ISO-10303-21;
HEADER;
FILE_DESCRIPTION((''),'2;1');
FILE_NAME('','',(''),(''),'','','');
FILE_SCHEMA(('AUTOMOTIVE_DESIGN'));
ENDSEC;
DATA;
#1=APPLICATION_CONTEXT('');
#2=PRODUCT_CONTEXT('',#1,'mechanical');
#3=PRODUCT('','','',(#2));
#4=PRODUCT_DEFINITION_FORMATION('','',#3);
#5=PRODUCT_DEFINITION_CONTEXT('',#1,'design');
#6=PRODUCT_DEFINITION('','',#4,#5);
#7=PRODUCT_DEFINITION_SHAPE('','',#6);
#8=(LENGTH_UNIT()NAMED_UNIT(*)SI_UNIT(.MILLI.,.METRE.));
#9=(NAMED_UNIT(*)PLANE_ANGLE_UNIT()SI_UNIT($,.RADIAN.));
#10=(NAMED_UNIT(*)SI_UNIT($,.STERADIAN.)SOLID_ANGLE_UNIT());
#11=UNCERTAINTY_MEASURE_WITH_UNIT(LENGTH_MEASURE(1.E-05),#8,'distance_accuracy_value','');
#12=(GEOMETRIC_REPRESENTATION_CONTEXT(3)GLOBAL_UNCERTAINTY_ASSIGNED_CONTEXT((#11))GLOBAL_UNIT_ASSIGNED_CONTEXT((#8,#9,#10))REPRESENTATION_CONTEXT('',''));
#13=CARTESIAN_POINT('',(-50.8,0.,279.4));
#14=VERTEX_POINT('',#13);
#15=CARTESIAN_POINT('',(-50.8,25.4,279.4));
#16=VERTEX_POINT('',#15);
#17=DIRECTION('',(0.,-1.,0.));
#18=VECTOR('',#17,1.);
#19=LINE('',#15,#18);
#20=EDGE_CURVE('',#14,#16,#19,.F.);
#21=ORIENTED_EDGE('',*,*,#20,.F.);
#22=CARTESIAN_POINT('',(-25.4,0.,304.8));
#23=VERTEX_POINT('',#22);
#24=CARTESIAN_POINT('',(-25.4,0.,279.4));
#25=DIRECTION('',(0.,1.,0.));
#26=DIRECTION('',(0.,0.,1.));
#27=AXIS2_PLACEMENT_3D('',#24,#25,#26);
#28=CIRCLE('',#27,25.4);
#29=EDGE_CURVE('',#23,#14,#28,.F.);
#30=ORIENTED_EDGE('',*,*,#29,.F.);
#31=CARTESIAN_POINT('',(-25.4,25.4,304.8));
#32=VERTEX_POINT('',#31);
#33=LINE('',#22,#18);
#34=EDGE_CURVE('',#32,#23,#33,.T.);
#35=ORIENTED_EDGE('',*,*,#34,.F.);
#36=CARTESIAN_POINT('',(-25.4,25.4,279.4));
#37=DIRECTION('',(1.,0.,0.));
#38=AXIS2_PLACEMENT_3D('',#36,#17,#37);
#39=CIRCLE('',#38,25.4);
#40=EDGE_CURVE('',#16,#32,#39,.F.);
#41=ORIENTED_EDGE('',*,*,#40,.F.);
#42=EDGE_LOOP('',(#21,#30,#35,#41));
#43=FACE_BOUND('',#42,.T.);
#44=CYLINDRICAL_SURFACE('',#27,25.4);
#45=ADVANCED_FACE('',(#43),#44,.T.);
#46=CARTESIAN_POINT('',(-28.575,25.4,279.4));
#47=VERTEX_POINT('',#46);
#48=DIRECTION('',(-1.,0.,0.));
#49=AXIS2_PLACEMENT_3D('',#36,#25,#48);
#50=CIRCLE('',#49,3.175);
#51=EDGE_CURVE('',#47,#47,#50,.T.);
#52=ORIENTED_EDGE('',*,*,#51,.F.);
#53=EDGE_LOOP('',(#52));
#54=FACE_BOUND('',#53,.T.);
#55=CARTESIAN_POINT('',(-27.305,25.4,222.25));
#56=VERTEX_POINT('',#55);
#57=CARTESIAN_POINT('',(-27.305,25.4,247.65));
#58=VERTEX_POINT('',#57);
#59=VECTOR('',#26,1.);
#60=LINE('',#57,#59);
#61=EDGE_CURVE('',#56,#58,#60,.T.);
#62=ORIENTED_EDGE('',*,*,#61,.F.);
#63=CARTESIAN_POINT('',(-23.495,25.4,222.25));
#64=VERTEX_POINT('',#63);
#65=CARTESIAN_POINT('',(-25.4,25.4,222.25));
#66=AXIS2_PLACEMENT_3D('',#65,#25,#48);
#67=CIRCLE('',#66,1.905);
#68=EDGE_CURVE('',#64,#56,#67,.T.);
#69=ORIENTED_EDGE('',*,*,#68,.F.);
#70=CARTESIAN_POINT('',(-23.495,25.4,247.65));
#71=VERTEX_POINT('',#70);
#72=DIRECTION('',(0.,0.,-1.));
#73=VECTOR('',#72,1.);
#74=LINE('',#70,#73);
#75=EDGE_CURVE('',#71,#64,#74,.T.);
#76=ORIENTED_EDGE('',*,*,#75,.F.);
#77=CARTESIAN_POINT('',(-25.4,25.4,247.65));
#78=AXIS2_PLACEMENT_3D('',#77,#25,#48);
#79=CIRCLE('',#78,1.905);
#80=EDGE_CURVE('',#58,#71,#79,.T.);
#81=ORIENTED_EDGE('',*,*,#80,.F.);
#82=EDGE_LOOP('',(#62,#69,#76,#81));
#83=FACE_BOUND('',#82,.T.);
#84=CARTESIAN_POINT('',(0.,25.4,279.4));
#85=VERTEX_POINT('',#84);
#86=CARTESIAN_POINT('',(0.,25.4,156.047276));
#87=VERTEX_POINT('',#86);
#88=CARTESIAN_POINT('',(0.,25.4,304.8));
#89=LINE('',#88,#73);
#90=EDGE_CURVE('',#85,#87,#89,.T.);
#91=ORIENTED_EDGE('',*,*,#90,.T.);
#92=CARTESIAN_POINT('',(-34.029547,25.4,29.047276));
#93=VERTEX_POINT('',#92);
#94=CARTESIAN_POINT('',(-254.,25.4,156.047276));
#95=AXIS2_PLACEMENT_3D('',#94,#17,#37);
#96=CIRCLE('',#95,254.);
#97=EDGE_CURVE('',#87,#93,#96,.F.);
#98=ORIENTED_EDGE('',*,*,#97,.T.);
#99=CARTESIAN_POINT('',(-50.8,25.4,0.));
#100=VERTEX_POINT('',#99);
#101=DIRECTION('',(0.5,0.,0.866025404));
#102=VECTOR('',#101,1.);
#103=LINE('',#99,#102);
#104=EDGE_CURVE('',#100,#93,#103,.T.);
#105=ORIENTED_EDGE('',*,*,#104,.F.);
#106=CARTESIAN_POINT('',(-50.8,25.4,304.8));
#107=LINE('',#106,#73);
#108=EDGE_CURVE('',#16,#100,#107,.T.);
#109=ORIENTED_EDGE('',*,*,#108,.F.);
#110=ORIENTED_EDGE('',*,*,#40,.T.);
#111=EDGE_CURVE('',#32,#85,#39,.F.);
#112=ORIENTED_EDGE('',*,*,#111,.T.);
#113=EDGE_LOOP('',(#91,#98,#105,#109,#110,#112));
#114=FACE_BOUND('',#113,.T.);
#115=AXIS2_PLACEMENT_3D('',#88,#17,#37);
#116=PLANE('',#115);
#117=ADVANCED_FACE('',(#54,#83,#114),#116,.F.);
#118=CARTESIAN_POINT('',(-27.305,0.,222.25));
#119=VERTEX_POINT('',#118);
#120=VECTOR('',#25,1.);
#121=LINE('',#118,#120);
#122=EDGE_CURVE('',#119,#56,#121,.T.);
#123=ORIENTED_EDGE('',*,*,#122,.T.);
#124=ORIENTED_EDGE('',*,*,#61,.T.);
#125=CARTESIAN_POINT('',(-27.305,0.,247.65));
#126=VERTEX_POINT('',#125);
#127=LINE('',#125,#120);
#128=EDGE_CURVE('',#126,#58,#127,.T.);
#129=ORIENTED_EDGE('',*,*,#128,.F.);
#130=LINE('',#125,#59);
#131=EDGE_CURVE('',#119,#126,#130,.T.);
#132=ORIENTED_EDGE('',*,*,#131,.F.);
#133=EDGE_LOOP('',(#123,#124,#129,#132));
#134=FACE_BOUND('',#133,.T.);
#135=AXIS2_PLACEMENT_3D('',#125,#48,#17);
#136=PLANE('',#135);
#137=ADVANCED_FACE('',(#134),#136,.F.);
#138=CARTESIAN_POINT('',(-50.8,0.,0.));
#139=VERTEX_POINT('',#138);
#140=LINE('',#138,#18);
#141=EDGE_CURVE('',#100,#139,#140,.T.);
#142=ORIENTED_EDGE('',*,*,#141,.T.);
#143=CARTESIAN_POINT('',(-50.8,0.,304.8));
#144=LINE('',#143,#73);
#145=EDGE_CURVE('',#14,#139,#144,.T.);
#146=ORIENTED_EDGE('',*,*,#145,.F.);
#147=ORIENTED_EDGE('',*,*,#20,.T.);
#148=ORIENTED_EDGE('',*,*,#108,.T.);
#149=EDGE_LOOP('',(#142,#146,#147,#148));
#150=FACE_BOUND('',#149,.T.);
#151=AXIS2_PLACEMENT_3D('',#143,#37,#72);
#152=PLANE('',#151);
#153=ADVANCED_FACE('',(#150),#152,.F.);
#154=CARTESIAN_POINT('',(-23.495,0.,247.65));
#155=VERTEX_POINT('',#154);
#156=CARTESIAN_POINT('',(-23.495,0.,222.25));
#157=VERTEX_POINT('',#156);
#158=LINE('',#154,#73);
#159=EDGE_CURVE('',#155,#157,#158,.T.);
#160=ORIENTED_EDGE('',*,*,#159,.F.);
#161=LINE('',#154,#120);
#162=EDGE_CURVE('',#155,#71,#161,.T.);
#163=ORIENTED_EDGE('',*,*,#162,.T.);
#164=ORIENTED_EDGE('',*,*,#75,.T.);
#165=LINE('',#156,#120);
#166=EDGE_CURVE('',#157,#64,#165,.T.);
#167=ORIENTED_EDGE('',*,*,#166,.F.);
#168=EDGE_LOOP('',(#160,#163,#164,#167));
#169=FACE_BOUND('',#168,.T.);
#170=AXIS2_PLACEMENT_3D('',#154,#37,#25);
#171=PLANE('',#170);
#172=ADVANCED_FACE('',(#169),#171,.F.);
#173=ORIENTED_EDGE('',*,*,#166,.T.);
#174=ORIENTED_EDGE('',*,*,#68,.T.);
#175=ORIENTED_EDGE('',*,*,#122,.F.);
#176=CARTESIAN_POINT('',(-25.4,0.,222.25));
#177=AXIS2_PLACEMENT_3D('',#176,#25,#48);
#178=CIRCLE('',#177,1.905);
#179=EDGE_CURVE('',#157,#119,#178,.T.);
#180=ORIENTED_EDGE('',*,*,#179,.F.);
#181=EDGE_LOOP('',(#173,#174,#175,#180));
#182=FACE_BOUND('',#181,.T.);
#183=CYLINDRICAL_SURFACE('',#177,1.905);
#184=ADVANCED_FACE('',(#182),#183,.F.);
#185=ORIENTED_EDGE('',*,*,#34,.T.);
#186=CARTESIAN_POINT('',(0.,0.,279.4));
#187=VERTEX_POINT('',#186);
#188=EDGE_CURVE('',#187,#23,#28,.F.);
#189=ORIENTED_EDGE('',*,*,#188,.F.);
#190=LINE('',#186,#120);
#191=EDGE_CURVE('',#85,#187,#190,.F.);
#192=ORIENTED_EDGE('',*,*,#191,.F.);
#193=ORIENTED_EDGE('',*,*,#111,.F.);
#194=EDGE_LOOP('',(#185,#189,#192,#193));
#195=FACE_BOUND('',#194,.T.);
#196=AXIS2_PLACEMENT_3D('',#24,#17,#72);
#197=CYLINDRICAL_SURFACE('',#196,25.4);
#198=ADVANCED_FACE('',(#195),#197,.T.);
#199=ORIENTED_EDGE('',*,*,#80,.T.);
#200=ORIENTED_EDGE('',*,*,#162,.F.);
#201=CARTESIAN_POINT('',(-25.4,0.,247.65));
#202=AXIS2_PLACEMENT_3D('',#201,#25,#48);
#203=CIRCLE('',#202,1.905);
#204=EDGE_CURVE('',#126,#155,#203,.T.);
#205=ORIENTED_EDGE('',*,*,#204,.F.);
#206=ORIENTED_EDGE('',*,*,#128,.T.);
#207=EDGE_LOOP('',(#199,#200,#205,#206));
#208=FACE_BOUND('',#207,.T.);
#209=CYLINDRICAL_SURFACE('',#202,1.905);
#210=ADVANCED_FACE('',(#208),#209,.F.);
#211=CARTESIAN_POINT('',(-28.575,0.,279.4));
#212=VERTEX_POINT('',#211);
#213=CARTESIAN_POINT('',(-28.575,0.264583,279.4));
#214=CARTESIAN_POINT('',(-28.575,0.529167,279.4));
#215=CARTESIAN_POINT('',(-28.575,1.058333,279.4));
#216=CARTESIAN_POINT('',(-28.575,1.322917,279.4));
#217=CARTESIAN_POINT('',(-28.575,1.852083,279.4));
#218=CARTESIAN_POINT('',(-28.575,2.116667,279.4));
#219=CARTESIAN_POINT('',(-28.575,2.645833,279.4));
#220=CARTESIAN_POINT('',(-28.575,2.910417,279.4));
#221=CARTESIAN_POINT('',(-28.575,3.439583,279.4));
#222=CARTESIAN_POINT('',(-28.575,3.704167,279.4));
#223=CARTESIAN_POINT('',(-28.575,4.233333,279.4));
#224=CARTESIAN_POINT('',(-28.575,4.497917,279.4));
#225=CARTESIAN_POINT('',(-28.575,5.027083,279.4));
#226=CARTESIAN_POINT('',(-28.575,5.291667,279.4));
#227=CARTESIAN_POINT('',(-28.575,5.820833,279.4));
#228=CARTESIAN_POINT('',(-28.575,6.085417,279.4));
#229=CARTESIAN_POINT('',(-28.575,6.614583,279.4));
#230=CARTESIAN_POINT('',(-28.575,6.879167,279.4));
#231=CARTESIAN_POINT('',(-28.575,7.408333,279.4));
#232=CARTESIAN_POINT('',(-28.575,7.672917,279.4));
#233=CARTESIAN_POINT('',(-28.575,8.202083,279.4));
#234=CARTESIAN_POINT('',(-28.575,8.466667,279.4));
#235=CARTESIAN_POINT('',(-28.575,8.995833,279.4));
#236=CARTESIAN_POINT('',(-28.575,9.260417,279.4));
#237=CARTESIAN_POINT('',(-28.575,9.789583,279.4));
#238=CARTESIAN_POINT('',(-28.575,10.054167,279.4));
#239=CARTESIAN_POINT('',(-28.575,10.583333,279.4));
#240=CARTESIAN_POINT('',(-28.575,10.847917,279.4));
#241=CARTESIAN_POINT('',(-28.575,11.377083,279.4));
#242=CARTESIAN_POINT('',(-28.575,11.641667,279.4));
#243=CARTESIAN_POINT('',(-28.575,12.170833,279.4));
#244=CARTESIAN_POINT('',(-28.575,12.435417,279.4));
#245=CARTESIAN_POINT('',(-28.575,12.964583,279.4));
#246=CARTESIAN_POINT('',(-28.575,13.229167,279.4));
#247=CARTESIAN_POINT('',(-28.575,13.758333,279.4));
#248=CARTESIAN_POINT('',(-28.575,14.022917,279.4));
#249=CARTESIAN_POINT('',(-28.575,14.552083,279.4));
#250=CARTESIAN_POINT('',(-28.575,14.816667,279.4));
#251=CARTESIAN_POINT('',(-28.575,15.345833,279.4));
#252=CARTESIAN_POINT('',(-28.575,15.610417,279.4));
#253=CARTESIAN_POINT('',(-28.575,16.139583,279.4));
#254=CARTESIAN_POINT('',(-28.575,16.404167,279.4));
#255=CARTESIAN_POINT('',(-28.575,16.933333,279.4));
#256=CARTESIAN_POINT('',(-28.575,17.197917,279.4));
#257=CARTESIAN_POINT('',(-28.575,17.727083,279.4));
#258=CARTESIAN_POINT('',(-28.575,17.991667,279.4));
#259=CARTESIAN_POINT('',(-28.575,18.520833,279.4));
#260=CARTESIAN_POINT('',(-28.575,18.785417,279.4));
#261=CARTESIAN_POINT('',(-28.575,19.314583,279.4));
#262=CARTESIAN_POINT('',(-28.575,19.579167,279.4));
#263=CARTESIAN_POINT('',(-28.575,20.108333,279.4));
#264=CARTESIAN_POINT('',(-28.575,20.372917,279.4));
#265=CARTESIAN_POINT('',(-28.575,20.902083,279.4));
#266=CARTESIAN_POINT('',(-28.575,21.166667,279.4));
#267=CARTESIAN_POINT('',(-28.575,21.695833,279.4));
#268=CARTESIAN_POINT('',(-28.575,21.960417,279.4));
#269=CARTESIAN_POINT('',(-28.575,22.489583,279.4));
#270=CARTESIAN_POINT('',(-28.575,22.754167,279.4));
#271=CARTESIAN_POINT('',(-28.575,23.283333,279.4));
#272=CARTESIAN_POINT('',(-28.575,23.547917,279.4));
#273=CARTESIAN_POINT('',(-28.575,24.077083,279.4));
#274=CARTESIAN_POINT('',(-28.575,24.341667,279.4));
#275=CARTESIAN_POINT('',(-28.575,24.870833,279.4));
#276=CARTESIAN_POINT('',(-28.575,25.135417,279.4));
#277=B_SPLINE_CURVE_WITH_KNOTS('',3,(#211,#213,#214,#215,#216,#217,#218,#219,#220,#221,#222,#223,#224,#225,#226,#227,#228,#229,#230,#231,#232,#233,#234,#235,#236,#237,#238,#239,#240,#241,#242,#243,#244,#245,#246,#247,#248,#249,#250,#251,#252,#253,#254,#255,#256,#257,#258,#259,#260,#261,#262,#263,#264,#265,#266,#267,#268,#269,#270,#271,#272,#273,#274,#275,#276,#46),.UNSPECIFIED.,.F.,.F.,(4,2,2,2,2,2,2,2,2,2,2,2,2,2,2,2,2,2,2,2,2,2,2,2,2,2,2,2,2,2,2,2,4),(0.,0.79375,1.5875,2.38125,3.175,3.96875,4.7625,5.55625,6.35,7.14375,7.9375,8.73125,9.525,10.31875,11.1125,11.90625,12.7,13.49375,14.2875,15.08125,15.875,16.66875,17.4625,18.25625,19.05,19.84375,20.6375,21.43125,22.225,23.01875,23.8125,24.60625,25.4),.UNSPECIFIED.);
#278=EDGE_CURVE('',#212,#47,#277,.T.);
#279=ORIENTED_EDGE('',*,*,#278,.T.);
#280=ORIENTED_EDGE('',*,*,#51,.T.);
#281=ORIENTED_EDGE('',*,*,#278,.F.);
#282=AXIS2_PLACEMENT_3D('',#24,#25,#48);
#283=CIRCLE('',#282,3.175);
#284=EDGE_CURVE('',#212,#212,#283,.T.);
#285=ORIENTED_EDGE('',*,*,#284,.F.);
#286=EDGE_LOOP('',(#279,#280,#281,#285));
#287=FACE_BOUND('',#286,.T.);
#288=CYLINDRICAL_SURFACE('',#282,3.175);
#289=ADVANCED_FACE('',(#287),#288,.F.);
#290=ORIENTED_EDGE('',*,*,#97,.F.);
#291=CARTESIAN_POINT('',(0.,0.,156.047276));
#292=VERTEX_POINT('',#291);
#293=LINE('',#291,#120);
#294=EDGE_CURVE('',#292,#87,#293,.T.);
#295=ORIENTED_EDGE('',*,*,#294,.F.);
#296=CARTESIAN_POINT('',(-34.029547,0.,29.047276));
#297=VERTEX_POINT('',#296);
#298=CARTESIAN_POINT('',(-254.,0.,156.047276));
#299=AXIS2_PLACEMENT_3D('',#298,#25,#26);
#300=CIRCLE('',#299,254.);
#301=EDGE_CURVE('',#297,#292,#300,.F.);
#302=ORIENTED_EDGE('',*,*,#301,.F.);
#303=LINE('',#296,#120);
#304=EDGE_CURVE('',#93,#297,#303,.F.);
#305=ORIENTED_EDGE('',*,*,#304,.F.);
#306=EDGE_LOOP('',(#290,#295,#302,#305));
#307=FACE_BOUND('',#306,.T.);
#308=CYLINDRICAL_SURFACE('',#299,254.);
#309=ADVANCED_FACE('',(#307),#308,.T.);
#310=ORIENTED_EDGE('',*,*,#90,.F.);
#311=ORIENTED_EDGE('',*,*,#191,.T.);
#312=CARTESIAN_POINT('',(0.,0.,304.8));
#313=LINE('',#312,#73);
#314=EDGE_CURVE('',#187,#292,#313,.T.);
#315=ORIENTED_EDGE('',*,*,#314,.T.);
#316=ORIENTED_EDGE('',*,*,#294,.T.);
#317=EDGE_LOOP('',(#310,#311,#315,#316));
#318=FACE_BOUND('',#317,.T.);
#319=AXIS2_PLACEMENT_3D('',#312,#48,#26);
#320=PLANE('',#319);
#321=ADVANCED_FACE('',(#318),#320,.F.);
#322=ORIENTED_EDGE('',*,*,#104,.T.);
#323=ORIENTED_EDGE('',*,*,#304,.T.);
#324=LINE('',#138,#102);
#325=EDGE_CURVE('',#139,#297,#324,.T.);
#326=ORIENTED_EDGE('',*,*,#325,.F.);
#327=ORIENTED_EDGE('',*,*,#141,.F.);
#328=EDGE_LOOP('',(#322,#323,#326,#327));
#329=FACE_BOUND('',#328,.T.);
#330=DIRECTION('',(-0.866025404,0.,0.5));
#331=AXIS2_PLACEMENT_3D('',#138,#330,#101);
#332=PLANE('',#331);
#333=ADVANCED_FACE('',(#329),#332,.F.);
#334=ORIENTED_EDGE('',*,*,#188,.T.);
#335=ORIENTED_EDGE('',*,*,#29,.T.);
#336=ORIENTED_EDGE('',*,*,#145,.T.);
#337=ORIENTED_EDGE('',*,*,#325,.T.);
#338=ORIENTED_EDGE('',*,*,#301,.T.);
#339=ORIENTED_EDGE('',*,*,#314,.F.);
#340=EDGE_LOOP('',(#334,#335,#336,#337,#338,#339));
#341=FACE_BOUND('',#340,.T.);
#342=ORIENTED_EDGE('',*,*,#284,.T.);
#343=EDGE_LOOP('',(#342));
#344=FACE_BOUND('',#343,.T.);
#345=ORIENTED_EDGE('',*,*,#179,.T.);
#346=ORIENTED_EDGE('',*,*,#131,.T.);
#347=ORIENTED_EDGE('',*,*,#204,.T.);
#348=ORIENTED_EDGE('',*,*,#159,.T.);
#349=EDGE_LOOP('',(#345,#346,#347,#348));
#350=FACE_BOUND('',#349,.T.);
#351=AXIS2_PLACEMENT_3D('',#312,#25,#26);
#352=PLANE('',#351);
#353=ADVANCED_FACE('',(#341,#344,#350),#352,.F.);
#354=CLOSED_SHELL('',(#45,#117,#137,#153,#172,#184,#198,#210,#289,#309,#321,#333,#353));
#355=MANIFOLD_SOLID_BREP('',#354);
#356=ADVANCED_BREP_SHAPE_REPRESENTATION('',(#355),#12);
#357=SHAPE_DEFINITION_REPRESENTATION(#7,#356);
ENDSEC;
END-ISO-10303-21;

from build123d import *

# Parameters (mm, degrees)
SKETCH1_W           = 50.8
SKETCH1_H           = 25.4
BOSS_EXTRUDE1_DEPTH = 304.8
FILLET1_R           = 25.4
CUT_EXTRUDE1_DEPTH  = 311.04651264
FILLET2_R           = 254
SKETCH7_R           = 3.175
CUT_EXTRUDE2_DEPTH  = 311.04651264
CUT_EXTRUDE3_DEPTH  = 311.04651264


with BuildPart() as part:
    # Sketch1 → Boss-Extrude1 (new body)
    with BuildSketch(Plane.XY):
        with Locations((-25.4, 12.7)):
            Rectangle(SKETCH1_W, SKETCH1_H)
    extrude(amount=BOSS_EXTRUDE1_DEPTH)

    # Fillet1
    fillet1_edges = [part.edges().sort_by_distance(p)[0] for p in [
        (0, 12.7, 304.8),
        (-50.8, 12.7, 304.8),
    ]]
    fillet(fillet1_edges, radius=FILLET1_R - 0.0001)  # a hair under: the kernel refuses the full size

    # Sketch6 → Cut-Extrude1 (cut, through all)
    with BuildSketch(Plane(origin=(0, 25.4, 0), x_dir=(1, 0, 0), z_dir=(0, 1, 0))):
        Polygon((-50.8, 0), (0, -87.988181024), (0, 0), align=None)
    extrude(amount=-CUT_EXTRUDE1_DEPTH, mode=Mode.SUBTRACT)

    # Fillet2
    fillet2_edges = [part.edges().sort_by_distance(p)[0] for p in [
        (0, 12.7, 87.988181024),
    ]]
    fillet(fillet2_edges, radius=FILLET2_R)

    # Sketch7 → Cut-Extrude2 (cut, through all)
    with BuildSketch(Plane(origin=(0, 25.4, 0), x_dir=(1, 0, 0), z_dir=(0, 1, 0))):
        with Locations(Location((-25.4, -279.4, 0), (0, 0, 180))):
            Circle(SKETCH7_R)
    extrude(amount=-CUT_EXTRUDE2_DEPTH, mode=Mode.SUBTRACT)

    # Sketch8 → Cut-Extrude3 (cut, through all)
    with BuildSketch(Plane(origin=(0, 25.4, 0), x_dir=(1, 0, 0), z_dir=(0, 1, 0))):
        with BuildLine():
            Line((-27.305, -247.65), (-27.305, -222.25))
            ThreePointArc((-27.305, -222.25), (-25.4, -220.345), (-23.495, -222.25))
            Line((-23.495, -222.25), (-23.495, -247.65))
            ThreePointArc((-23.495, -247.65), (-25.4, -249.555), (-27.305, -247.65))
        make_face()
    extrude(amount=-CUT_EXTRUDE3_DEPTH, mode=Mode.SUBTRACT)


solid = part.part
